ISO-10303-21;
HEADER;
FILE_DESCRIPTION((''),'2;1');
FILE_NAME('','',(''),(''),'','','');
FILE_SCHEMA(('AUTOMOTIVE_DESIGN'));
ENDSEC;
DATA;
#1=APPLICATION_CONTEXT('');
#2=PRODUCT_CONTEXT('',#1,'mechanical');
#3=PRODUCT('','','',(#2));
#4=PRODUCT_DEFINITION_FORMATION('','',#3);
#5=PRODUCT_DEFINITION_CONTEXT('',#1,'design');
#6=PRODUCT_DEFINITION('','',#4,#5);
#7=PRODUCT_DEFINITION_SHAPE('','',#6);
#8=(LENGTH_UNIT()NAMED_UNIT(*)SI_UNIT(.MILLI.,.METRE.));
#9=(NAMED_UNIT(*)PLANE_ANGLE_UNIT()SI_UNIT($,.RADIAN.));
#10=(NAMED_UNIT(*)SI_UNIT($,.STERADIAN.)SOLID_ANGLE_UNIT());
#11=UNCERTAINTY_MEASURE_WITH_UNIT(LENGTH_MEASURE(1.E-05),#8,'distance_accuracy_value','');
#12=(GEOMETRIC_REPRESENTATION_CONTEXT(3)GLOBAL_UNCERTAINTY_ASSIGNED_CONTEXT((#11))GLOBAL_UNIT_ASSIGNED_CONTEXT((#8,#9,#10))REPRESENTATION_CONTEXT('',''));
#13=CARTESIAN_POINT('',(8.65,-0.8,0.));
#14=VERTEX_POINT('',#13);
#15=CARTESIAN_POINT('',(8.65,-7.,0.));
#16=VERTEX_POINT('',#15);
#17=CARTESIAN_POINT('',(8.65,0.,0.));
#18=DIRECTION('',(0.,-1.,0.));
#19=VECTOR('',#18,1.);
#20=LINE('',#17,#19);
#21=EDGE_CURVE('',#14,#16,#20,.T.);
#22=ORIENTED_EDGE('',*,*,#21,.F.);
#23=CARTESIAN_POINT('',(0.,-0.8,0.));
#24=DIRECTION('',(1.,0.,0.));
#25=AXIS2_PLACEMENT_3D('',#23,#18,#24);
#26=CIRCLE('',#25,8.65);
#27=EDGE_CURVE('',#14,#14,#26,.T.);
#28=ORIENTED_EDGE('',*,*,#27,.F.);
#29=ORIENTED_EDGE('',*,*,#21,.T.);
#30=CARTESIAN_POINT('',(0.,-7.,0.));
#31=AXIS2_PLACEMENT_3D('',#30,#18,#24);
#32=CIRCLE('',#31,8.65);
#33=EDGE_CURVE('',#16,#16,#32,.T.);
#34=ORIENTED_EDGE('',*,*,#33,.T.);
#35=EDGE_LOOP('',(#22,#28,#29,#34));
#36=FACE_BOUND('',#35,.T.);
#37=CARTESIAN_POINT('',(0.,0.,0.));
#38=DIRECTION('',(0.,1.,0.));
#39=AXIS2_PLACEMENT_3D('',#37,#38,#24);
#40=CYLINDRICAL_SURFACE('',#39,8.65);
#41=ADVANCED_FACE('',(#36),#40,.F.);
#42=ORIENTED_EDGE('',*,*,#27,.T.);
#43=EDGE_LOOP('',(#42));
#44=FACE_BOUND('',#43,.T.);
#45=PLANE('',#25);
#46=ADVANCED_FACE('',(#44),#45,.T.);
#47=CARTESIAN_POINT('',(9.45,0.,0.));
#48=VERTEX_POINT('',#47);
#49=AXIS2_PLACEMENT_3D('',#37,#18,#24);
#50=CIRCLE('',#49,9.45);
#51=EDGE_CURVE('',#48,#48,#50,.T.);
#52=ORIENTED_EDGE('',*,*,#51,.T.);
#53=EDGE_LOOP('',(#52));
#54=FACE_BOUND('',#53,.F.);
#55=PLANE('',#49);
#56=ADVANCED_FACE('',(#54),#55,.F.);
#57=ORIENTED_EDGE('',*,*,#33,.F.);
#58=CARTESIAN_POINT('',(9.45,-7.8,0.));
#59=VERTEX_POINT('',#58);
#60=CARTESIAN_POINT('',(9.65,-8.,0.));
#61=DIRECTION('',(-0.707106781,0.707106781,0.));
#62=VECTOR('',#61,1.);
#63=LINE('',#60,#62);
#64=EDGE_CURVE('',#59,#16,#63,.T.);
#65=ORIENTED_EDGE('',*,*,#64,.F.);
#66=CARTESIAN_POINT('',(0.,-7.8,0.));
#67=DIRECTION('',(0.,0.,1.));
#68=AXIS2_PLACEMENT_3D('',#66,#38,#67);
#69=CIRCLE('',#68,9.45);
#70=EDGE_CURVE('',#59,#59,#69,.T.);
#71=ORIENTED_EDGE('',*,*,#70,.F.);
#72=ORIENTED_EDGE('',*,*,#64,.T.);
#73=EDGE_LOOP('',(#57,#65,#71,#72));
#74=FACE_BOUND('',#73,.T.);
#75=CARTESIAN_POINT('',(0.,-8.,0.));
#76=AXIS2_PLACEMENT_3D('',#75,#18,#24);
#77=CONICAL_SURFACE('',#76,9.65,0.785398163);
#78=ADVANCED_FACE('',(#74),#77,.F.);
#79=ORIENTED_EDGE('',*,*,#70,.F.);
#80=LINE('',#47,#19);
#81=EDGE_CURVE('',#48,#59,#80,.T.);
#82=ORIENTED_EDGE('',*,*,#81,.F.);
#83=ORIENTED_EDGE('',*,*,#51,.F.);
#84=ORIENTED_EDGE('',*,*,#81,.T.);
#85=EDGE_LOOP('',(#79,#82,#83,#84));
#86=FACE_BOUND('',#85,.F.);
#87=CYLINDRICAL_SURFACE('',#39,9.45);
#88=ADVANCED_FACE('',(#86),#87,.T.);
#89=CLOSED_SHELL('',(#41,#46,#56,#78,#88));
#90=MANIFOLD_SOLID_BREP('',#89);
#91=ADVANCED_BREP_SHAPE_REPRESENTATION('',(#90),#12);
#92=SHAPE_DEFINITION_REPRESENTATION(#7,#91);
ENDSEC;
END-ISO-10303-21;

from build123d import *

# Parameters (mm, degrees)
F0_R     = 9.45
F0_R_2   = 8.65
F1_DEPTH = 8
F2_R     = 8.65
F3_DEPTH = 0.8


# Not quite as in the source:
# - a fillet or chamfer that OpenCascade refuses, or shapes differently, is made with other operations: its cross-section is extruded or revolved along the edge and cut away or added


with BuildPart() as f1:
    # F0 (on Front) → F1 (new body)
    with BuildSketch(Plane.XZ):
        Circle(F0_R)
        Circle(F0_R_2, mode=Mode.SUBTRACT)
    extrude(amount=F1_DEPTH)

    # F2 (on Front) → F3 (join)
    with BuildSketch(Plane.XZ):
        Circle(F2_R)
    extrude(amount=F3_DEPTH)

    # F4: chamfer of 1 on 1 edges, made by hand

    # F4_s1 → F4_t2 (revolve, cut)
    with BuildSketch(Plane.XY):
        Polygon((9.65, -8), (8.65, -7), (8.65, -8), align=None)
    revolve(axis=Axis((0, -8, 0), (0, -1, 0)), mode=Mode.SUBTRACT)


solid = f1.part
